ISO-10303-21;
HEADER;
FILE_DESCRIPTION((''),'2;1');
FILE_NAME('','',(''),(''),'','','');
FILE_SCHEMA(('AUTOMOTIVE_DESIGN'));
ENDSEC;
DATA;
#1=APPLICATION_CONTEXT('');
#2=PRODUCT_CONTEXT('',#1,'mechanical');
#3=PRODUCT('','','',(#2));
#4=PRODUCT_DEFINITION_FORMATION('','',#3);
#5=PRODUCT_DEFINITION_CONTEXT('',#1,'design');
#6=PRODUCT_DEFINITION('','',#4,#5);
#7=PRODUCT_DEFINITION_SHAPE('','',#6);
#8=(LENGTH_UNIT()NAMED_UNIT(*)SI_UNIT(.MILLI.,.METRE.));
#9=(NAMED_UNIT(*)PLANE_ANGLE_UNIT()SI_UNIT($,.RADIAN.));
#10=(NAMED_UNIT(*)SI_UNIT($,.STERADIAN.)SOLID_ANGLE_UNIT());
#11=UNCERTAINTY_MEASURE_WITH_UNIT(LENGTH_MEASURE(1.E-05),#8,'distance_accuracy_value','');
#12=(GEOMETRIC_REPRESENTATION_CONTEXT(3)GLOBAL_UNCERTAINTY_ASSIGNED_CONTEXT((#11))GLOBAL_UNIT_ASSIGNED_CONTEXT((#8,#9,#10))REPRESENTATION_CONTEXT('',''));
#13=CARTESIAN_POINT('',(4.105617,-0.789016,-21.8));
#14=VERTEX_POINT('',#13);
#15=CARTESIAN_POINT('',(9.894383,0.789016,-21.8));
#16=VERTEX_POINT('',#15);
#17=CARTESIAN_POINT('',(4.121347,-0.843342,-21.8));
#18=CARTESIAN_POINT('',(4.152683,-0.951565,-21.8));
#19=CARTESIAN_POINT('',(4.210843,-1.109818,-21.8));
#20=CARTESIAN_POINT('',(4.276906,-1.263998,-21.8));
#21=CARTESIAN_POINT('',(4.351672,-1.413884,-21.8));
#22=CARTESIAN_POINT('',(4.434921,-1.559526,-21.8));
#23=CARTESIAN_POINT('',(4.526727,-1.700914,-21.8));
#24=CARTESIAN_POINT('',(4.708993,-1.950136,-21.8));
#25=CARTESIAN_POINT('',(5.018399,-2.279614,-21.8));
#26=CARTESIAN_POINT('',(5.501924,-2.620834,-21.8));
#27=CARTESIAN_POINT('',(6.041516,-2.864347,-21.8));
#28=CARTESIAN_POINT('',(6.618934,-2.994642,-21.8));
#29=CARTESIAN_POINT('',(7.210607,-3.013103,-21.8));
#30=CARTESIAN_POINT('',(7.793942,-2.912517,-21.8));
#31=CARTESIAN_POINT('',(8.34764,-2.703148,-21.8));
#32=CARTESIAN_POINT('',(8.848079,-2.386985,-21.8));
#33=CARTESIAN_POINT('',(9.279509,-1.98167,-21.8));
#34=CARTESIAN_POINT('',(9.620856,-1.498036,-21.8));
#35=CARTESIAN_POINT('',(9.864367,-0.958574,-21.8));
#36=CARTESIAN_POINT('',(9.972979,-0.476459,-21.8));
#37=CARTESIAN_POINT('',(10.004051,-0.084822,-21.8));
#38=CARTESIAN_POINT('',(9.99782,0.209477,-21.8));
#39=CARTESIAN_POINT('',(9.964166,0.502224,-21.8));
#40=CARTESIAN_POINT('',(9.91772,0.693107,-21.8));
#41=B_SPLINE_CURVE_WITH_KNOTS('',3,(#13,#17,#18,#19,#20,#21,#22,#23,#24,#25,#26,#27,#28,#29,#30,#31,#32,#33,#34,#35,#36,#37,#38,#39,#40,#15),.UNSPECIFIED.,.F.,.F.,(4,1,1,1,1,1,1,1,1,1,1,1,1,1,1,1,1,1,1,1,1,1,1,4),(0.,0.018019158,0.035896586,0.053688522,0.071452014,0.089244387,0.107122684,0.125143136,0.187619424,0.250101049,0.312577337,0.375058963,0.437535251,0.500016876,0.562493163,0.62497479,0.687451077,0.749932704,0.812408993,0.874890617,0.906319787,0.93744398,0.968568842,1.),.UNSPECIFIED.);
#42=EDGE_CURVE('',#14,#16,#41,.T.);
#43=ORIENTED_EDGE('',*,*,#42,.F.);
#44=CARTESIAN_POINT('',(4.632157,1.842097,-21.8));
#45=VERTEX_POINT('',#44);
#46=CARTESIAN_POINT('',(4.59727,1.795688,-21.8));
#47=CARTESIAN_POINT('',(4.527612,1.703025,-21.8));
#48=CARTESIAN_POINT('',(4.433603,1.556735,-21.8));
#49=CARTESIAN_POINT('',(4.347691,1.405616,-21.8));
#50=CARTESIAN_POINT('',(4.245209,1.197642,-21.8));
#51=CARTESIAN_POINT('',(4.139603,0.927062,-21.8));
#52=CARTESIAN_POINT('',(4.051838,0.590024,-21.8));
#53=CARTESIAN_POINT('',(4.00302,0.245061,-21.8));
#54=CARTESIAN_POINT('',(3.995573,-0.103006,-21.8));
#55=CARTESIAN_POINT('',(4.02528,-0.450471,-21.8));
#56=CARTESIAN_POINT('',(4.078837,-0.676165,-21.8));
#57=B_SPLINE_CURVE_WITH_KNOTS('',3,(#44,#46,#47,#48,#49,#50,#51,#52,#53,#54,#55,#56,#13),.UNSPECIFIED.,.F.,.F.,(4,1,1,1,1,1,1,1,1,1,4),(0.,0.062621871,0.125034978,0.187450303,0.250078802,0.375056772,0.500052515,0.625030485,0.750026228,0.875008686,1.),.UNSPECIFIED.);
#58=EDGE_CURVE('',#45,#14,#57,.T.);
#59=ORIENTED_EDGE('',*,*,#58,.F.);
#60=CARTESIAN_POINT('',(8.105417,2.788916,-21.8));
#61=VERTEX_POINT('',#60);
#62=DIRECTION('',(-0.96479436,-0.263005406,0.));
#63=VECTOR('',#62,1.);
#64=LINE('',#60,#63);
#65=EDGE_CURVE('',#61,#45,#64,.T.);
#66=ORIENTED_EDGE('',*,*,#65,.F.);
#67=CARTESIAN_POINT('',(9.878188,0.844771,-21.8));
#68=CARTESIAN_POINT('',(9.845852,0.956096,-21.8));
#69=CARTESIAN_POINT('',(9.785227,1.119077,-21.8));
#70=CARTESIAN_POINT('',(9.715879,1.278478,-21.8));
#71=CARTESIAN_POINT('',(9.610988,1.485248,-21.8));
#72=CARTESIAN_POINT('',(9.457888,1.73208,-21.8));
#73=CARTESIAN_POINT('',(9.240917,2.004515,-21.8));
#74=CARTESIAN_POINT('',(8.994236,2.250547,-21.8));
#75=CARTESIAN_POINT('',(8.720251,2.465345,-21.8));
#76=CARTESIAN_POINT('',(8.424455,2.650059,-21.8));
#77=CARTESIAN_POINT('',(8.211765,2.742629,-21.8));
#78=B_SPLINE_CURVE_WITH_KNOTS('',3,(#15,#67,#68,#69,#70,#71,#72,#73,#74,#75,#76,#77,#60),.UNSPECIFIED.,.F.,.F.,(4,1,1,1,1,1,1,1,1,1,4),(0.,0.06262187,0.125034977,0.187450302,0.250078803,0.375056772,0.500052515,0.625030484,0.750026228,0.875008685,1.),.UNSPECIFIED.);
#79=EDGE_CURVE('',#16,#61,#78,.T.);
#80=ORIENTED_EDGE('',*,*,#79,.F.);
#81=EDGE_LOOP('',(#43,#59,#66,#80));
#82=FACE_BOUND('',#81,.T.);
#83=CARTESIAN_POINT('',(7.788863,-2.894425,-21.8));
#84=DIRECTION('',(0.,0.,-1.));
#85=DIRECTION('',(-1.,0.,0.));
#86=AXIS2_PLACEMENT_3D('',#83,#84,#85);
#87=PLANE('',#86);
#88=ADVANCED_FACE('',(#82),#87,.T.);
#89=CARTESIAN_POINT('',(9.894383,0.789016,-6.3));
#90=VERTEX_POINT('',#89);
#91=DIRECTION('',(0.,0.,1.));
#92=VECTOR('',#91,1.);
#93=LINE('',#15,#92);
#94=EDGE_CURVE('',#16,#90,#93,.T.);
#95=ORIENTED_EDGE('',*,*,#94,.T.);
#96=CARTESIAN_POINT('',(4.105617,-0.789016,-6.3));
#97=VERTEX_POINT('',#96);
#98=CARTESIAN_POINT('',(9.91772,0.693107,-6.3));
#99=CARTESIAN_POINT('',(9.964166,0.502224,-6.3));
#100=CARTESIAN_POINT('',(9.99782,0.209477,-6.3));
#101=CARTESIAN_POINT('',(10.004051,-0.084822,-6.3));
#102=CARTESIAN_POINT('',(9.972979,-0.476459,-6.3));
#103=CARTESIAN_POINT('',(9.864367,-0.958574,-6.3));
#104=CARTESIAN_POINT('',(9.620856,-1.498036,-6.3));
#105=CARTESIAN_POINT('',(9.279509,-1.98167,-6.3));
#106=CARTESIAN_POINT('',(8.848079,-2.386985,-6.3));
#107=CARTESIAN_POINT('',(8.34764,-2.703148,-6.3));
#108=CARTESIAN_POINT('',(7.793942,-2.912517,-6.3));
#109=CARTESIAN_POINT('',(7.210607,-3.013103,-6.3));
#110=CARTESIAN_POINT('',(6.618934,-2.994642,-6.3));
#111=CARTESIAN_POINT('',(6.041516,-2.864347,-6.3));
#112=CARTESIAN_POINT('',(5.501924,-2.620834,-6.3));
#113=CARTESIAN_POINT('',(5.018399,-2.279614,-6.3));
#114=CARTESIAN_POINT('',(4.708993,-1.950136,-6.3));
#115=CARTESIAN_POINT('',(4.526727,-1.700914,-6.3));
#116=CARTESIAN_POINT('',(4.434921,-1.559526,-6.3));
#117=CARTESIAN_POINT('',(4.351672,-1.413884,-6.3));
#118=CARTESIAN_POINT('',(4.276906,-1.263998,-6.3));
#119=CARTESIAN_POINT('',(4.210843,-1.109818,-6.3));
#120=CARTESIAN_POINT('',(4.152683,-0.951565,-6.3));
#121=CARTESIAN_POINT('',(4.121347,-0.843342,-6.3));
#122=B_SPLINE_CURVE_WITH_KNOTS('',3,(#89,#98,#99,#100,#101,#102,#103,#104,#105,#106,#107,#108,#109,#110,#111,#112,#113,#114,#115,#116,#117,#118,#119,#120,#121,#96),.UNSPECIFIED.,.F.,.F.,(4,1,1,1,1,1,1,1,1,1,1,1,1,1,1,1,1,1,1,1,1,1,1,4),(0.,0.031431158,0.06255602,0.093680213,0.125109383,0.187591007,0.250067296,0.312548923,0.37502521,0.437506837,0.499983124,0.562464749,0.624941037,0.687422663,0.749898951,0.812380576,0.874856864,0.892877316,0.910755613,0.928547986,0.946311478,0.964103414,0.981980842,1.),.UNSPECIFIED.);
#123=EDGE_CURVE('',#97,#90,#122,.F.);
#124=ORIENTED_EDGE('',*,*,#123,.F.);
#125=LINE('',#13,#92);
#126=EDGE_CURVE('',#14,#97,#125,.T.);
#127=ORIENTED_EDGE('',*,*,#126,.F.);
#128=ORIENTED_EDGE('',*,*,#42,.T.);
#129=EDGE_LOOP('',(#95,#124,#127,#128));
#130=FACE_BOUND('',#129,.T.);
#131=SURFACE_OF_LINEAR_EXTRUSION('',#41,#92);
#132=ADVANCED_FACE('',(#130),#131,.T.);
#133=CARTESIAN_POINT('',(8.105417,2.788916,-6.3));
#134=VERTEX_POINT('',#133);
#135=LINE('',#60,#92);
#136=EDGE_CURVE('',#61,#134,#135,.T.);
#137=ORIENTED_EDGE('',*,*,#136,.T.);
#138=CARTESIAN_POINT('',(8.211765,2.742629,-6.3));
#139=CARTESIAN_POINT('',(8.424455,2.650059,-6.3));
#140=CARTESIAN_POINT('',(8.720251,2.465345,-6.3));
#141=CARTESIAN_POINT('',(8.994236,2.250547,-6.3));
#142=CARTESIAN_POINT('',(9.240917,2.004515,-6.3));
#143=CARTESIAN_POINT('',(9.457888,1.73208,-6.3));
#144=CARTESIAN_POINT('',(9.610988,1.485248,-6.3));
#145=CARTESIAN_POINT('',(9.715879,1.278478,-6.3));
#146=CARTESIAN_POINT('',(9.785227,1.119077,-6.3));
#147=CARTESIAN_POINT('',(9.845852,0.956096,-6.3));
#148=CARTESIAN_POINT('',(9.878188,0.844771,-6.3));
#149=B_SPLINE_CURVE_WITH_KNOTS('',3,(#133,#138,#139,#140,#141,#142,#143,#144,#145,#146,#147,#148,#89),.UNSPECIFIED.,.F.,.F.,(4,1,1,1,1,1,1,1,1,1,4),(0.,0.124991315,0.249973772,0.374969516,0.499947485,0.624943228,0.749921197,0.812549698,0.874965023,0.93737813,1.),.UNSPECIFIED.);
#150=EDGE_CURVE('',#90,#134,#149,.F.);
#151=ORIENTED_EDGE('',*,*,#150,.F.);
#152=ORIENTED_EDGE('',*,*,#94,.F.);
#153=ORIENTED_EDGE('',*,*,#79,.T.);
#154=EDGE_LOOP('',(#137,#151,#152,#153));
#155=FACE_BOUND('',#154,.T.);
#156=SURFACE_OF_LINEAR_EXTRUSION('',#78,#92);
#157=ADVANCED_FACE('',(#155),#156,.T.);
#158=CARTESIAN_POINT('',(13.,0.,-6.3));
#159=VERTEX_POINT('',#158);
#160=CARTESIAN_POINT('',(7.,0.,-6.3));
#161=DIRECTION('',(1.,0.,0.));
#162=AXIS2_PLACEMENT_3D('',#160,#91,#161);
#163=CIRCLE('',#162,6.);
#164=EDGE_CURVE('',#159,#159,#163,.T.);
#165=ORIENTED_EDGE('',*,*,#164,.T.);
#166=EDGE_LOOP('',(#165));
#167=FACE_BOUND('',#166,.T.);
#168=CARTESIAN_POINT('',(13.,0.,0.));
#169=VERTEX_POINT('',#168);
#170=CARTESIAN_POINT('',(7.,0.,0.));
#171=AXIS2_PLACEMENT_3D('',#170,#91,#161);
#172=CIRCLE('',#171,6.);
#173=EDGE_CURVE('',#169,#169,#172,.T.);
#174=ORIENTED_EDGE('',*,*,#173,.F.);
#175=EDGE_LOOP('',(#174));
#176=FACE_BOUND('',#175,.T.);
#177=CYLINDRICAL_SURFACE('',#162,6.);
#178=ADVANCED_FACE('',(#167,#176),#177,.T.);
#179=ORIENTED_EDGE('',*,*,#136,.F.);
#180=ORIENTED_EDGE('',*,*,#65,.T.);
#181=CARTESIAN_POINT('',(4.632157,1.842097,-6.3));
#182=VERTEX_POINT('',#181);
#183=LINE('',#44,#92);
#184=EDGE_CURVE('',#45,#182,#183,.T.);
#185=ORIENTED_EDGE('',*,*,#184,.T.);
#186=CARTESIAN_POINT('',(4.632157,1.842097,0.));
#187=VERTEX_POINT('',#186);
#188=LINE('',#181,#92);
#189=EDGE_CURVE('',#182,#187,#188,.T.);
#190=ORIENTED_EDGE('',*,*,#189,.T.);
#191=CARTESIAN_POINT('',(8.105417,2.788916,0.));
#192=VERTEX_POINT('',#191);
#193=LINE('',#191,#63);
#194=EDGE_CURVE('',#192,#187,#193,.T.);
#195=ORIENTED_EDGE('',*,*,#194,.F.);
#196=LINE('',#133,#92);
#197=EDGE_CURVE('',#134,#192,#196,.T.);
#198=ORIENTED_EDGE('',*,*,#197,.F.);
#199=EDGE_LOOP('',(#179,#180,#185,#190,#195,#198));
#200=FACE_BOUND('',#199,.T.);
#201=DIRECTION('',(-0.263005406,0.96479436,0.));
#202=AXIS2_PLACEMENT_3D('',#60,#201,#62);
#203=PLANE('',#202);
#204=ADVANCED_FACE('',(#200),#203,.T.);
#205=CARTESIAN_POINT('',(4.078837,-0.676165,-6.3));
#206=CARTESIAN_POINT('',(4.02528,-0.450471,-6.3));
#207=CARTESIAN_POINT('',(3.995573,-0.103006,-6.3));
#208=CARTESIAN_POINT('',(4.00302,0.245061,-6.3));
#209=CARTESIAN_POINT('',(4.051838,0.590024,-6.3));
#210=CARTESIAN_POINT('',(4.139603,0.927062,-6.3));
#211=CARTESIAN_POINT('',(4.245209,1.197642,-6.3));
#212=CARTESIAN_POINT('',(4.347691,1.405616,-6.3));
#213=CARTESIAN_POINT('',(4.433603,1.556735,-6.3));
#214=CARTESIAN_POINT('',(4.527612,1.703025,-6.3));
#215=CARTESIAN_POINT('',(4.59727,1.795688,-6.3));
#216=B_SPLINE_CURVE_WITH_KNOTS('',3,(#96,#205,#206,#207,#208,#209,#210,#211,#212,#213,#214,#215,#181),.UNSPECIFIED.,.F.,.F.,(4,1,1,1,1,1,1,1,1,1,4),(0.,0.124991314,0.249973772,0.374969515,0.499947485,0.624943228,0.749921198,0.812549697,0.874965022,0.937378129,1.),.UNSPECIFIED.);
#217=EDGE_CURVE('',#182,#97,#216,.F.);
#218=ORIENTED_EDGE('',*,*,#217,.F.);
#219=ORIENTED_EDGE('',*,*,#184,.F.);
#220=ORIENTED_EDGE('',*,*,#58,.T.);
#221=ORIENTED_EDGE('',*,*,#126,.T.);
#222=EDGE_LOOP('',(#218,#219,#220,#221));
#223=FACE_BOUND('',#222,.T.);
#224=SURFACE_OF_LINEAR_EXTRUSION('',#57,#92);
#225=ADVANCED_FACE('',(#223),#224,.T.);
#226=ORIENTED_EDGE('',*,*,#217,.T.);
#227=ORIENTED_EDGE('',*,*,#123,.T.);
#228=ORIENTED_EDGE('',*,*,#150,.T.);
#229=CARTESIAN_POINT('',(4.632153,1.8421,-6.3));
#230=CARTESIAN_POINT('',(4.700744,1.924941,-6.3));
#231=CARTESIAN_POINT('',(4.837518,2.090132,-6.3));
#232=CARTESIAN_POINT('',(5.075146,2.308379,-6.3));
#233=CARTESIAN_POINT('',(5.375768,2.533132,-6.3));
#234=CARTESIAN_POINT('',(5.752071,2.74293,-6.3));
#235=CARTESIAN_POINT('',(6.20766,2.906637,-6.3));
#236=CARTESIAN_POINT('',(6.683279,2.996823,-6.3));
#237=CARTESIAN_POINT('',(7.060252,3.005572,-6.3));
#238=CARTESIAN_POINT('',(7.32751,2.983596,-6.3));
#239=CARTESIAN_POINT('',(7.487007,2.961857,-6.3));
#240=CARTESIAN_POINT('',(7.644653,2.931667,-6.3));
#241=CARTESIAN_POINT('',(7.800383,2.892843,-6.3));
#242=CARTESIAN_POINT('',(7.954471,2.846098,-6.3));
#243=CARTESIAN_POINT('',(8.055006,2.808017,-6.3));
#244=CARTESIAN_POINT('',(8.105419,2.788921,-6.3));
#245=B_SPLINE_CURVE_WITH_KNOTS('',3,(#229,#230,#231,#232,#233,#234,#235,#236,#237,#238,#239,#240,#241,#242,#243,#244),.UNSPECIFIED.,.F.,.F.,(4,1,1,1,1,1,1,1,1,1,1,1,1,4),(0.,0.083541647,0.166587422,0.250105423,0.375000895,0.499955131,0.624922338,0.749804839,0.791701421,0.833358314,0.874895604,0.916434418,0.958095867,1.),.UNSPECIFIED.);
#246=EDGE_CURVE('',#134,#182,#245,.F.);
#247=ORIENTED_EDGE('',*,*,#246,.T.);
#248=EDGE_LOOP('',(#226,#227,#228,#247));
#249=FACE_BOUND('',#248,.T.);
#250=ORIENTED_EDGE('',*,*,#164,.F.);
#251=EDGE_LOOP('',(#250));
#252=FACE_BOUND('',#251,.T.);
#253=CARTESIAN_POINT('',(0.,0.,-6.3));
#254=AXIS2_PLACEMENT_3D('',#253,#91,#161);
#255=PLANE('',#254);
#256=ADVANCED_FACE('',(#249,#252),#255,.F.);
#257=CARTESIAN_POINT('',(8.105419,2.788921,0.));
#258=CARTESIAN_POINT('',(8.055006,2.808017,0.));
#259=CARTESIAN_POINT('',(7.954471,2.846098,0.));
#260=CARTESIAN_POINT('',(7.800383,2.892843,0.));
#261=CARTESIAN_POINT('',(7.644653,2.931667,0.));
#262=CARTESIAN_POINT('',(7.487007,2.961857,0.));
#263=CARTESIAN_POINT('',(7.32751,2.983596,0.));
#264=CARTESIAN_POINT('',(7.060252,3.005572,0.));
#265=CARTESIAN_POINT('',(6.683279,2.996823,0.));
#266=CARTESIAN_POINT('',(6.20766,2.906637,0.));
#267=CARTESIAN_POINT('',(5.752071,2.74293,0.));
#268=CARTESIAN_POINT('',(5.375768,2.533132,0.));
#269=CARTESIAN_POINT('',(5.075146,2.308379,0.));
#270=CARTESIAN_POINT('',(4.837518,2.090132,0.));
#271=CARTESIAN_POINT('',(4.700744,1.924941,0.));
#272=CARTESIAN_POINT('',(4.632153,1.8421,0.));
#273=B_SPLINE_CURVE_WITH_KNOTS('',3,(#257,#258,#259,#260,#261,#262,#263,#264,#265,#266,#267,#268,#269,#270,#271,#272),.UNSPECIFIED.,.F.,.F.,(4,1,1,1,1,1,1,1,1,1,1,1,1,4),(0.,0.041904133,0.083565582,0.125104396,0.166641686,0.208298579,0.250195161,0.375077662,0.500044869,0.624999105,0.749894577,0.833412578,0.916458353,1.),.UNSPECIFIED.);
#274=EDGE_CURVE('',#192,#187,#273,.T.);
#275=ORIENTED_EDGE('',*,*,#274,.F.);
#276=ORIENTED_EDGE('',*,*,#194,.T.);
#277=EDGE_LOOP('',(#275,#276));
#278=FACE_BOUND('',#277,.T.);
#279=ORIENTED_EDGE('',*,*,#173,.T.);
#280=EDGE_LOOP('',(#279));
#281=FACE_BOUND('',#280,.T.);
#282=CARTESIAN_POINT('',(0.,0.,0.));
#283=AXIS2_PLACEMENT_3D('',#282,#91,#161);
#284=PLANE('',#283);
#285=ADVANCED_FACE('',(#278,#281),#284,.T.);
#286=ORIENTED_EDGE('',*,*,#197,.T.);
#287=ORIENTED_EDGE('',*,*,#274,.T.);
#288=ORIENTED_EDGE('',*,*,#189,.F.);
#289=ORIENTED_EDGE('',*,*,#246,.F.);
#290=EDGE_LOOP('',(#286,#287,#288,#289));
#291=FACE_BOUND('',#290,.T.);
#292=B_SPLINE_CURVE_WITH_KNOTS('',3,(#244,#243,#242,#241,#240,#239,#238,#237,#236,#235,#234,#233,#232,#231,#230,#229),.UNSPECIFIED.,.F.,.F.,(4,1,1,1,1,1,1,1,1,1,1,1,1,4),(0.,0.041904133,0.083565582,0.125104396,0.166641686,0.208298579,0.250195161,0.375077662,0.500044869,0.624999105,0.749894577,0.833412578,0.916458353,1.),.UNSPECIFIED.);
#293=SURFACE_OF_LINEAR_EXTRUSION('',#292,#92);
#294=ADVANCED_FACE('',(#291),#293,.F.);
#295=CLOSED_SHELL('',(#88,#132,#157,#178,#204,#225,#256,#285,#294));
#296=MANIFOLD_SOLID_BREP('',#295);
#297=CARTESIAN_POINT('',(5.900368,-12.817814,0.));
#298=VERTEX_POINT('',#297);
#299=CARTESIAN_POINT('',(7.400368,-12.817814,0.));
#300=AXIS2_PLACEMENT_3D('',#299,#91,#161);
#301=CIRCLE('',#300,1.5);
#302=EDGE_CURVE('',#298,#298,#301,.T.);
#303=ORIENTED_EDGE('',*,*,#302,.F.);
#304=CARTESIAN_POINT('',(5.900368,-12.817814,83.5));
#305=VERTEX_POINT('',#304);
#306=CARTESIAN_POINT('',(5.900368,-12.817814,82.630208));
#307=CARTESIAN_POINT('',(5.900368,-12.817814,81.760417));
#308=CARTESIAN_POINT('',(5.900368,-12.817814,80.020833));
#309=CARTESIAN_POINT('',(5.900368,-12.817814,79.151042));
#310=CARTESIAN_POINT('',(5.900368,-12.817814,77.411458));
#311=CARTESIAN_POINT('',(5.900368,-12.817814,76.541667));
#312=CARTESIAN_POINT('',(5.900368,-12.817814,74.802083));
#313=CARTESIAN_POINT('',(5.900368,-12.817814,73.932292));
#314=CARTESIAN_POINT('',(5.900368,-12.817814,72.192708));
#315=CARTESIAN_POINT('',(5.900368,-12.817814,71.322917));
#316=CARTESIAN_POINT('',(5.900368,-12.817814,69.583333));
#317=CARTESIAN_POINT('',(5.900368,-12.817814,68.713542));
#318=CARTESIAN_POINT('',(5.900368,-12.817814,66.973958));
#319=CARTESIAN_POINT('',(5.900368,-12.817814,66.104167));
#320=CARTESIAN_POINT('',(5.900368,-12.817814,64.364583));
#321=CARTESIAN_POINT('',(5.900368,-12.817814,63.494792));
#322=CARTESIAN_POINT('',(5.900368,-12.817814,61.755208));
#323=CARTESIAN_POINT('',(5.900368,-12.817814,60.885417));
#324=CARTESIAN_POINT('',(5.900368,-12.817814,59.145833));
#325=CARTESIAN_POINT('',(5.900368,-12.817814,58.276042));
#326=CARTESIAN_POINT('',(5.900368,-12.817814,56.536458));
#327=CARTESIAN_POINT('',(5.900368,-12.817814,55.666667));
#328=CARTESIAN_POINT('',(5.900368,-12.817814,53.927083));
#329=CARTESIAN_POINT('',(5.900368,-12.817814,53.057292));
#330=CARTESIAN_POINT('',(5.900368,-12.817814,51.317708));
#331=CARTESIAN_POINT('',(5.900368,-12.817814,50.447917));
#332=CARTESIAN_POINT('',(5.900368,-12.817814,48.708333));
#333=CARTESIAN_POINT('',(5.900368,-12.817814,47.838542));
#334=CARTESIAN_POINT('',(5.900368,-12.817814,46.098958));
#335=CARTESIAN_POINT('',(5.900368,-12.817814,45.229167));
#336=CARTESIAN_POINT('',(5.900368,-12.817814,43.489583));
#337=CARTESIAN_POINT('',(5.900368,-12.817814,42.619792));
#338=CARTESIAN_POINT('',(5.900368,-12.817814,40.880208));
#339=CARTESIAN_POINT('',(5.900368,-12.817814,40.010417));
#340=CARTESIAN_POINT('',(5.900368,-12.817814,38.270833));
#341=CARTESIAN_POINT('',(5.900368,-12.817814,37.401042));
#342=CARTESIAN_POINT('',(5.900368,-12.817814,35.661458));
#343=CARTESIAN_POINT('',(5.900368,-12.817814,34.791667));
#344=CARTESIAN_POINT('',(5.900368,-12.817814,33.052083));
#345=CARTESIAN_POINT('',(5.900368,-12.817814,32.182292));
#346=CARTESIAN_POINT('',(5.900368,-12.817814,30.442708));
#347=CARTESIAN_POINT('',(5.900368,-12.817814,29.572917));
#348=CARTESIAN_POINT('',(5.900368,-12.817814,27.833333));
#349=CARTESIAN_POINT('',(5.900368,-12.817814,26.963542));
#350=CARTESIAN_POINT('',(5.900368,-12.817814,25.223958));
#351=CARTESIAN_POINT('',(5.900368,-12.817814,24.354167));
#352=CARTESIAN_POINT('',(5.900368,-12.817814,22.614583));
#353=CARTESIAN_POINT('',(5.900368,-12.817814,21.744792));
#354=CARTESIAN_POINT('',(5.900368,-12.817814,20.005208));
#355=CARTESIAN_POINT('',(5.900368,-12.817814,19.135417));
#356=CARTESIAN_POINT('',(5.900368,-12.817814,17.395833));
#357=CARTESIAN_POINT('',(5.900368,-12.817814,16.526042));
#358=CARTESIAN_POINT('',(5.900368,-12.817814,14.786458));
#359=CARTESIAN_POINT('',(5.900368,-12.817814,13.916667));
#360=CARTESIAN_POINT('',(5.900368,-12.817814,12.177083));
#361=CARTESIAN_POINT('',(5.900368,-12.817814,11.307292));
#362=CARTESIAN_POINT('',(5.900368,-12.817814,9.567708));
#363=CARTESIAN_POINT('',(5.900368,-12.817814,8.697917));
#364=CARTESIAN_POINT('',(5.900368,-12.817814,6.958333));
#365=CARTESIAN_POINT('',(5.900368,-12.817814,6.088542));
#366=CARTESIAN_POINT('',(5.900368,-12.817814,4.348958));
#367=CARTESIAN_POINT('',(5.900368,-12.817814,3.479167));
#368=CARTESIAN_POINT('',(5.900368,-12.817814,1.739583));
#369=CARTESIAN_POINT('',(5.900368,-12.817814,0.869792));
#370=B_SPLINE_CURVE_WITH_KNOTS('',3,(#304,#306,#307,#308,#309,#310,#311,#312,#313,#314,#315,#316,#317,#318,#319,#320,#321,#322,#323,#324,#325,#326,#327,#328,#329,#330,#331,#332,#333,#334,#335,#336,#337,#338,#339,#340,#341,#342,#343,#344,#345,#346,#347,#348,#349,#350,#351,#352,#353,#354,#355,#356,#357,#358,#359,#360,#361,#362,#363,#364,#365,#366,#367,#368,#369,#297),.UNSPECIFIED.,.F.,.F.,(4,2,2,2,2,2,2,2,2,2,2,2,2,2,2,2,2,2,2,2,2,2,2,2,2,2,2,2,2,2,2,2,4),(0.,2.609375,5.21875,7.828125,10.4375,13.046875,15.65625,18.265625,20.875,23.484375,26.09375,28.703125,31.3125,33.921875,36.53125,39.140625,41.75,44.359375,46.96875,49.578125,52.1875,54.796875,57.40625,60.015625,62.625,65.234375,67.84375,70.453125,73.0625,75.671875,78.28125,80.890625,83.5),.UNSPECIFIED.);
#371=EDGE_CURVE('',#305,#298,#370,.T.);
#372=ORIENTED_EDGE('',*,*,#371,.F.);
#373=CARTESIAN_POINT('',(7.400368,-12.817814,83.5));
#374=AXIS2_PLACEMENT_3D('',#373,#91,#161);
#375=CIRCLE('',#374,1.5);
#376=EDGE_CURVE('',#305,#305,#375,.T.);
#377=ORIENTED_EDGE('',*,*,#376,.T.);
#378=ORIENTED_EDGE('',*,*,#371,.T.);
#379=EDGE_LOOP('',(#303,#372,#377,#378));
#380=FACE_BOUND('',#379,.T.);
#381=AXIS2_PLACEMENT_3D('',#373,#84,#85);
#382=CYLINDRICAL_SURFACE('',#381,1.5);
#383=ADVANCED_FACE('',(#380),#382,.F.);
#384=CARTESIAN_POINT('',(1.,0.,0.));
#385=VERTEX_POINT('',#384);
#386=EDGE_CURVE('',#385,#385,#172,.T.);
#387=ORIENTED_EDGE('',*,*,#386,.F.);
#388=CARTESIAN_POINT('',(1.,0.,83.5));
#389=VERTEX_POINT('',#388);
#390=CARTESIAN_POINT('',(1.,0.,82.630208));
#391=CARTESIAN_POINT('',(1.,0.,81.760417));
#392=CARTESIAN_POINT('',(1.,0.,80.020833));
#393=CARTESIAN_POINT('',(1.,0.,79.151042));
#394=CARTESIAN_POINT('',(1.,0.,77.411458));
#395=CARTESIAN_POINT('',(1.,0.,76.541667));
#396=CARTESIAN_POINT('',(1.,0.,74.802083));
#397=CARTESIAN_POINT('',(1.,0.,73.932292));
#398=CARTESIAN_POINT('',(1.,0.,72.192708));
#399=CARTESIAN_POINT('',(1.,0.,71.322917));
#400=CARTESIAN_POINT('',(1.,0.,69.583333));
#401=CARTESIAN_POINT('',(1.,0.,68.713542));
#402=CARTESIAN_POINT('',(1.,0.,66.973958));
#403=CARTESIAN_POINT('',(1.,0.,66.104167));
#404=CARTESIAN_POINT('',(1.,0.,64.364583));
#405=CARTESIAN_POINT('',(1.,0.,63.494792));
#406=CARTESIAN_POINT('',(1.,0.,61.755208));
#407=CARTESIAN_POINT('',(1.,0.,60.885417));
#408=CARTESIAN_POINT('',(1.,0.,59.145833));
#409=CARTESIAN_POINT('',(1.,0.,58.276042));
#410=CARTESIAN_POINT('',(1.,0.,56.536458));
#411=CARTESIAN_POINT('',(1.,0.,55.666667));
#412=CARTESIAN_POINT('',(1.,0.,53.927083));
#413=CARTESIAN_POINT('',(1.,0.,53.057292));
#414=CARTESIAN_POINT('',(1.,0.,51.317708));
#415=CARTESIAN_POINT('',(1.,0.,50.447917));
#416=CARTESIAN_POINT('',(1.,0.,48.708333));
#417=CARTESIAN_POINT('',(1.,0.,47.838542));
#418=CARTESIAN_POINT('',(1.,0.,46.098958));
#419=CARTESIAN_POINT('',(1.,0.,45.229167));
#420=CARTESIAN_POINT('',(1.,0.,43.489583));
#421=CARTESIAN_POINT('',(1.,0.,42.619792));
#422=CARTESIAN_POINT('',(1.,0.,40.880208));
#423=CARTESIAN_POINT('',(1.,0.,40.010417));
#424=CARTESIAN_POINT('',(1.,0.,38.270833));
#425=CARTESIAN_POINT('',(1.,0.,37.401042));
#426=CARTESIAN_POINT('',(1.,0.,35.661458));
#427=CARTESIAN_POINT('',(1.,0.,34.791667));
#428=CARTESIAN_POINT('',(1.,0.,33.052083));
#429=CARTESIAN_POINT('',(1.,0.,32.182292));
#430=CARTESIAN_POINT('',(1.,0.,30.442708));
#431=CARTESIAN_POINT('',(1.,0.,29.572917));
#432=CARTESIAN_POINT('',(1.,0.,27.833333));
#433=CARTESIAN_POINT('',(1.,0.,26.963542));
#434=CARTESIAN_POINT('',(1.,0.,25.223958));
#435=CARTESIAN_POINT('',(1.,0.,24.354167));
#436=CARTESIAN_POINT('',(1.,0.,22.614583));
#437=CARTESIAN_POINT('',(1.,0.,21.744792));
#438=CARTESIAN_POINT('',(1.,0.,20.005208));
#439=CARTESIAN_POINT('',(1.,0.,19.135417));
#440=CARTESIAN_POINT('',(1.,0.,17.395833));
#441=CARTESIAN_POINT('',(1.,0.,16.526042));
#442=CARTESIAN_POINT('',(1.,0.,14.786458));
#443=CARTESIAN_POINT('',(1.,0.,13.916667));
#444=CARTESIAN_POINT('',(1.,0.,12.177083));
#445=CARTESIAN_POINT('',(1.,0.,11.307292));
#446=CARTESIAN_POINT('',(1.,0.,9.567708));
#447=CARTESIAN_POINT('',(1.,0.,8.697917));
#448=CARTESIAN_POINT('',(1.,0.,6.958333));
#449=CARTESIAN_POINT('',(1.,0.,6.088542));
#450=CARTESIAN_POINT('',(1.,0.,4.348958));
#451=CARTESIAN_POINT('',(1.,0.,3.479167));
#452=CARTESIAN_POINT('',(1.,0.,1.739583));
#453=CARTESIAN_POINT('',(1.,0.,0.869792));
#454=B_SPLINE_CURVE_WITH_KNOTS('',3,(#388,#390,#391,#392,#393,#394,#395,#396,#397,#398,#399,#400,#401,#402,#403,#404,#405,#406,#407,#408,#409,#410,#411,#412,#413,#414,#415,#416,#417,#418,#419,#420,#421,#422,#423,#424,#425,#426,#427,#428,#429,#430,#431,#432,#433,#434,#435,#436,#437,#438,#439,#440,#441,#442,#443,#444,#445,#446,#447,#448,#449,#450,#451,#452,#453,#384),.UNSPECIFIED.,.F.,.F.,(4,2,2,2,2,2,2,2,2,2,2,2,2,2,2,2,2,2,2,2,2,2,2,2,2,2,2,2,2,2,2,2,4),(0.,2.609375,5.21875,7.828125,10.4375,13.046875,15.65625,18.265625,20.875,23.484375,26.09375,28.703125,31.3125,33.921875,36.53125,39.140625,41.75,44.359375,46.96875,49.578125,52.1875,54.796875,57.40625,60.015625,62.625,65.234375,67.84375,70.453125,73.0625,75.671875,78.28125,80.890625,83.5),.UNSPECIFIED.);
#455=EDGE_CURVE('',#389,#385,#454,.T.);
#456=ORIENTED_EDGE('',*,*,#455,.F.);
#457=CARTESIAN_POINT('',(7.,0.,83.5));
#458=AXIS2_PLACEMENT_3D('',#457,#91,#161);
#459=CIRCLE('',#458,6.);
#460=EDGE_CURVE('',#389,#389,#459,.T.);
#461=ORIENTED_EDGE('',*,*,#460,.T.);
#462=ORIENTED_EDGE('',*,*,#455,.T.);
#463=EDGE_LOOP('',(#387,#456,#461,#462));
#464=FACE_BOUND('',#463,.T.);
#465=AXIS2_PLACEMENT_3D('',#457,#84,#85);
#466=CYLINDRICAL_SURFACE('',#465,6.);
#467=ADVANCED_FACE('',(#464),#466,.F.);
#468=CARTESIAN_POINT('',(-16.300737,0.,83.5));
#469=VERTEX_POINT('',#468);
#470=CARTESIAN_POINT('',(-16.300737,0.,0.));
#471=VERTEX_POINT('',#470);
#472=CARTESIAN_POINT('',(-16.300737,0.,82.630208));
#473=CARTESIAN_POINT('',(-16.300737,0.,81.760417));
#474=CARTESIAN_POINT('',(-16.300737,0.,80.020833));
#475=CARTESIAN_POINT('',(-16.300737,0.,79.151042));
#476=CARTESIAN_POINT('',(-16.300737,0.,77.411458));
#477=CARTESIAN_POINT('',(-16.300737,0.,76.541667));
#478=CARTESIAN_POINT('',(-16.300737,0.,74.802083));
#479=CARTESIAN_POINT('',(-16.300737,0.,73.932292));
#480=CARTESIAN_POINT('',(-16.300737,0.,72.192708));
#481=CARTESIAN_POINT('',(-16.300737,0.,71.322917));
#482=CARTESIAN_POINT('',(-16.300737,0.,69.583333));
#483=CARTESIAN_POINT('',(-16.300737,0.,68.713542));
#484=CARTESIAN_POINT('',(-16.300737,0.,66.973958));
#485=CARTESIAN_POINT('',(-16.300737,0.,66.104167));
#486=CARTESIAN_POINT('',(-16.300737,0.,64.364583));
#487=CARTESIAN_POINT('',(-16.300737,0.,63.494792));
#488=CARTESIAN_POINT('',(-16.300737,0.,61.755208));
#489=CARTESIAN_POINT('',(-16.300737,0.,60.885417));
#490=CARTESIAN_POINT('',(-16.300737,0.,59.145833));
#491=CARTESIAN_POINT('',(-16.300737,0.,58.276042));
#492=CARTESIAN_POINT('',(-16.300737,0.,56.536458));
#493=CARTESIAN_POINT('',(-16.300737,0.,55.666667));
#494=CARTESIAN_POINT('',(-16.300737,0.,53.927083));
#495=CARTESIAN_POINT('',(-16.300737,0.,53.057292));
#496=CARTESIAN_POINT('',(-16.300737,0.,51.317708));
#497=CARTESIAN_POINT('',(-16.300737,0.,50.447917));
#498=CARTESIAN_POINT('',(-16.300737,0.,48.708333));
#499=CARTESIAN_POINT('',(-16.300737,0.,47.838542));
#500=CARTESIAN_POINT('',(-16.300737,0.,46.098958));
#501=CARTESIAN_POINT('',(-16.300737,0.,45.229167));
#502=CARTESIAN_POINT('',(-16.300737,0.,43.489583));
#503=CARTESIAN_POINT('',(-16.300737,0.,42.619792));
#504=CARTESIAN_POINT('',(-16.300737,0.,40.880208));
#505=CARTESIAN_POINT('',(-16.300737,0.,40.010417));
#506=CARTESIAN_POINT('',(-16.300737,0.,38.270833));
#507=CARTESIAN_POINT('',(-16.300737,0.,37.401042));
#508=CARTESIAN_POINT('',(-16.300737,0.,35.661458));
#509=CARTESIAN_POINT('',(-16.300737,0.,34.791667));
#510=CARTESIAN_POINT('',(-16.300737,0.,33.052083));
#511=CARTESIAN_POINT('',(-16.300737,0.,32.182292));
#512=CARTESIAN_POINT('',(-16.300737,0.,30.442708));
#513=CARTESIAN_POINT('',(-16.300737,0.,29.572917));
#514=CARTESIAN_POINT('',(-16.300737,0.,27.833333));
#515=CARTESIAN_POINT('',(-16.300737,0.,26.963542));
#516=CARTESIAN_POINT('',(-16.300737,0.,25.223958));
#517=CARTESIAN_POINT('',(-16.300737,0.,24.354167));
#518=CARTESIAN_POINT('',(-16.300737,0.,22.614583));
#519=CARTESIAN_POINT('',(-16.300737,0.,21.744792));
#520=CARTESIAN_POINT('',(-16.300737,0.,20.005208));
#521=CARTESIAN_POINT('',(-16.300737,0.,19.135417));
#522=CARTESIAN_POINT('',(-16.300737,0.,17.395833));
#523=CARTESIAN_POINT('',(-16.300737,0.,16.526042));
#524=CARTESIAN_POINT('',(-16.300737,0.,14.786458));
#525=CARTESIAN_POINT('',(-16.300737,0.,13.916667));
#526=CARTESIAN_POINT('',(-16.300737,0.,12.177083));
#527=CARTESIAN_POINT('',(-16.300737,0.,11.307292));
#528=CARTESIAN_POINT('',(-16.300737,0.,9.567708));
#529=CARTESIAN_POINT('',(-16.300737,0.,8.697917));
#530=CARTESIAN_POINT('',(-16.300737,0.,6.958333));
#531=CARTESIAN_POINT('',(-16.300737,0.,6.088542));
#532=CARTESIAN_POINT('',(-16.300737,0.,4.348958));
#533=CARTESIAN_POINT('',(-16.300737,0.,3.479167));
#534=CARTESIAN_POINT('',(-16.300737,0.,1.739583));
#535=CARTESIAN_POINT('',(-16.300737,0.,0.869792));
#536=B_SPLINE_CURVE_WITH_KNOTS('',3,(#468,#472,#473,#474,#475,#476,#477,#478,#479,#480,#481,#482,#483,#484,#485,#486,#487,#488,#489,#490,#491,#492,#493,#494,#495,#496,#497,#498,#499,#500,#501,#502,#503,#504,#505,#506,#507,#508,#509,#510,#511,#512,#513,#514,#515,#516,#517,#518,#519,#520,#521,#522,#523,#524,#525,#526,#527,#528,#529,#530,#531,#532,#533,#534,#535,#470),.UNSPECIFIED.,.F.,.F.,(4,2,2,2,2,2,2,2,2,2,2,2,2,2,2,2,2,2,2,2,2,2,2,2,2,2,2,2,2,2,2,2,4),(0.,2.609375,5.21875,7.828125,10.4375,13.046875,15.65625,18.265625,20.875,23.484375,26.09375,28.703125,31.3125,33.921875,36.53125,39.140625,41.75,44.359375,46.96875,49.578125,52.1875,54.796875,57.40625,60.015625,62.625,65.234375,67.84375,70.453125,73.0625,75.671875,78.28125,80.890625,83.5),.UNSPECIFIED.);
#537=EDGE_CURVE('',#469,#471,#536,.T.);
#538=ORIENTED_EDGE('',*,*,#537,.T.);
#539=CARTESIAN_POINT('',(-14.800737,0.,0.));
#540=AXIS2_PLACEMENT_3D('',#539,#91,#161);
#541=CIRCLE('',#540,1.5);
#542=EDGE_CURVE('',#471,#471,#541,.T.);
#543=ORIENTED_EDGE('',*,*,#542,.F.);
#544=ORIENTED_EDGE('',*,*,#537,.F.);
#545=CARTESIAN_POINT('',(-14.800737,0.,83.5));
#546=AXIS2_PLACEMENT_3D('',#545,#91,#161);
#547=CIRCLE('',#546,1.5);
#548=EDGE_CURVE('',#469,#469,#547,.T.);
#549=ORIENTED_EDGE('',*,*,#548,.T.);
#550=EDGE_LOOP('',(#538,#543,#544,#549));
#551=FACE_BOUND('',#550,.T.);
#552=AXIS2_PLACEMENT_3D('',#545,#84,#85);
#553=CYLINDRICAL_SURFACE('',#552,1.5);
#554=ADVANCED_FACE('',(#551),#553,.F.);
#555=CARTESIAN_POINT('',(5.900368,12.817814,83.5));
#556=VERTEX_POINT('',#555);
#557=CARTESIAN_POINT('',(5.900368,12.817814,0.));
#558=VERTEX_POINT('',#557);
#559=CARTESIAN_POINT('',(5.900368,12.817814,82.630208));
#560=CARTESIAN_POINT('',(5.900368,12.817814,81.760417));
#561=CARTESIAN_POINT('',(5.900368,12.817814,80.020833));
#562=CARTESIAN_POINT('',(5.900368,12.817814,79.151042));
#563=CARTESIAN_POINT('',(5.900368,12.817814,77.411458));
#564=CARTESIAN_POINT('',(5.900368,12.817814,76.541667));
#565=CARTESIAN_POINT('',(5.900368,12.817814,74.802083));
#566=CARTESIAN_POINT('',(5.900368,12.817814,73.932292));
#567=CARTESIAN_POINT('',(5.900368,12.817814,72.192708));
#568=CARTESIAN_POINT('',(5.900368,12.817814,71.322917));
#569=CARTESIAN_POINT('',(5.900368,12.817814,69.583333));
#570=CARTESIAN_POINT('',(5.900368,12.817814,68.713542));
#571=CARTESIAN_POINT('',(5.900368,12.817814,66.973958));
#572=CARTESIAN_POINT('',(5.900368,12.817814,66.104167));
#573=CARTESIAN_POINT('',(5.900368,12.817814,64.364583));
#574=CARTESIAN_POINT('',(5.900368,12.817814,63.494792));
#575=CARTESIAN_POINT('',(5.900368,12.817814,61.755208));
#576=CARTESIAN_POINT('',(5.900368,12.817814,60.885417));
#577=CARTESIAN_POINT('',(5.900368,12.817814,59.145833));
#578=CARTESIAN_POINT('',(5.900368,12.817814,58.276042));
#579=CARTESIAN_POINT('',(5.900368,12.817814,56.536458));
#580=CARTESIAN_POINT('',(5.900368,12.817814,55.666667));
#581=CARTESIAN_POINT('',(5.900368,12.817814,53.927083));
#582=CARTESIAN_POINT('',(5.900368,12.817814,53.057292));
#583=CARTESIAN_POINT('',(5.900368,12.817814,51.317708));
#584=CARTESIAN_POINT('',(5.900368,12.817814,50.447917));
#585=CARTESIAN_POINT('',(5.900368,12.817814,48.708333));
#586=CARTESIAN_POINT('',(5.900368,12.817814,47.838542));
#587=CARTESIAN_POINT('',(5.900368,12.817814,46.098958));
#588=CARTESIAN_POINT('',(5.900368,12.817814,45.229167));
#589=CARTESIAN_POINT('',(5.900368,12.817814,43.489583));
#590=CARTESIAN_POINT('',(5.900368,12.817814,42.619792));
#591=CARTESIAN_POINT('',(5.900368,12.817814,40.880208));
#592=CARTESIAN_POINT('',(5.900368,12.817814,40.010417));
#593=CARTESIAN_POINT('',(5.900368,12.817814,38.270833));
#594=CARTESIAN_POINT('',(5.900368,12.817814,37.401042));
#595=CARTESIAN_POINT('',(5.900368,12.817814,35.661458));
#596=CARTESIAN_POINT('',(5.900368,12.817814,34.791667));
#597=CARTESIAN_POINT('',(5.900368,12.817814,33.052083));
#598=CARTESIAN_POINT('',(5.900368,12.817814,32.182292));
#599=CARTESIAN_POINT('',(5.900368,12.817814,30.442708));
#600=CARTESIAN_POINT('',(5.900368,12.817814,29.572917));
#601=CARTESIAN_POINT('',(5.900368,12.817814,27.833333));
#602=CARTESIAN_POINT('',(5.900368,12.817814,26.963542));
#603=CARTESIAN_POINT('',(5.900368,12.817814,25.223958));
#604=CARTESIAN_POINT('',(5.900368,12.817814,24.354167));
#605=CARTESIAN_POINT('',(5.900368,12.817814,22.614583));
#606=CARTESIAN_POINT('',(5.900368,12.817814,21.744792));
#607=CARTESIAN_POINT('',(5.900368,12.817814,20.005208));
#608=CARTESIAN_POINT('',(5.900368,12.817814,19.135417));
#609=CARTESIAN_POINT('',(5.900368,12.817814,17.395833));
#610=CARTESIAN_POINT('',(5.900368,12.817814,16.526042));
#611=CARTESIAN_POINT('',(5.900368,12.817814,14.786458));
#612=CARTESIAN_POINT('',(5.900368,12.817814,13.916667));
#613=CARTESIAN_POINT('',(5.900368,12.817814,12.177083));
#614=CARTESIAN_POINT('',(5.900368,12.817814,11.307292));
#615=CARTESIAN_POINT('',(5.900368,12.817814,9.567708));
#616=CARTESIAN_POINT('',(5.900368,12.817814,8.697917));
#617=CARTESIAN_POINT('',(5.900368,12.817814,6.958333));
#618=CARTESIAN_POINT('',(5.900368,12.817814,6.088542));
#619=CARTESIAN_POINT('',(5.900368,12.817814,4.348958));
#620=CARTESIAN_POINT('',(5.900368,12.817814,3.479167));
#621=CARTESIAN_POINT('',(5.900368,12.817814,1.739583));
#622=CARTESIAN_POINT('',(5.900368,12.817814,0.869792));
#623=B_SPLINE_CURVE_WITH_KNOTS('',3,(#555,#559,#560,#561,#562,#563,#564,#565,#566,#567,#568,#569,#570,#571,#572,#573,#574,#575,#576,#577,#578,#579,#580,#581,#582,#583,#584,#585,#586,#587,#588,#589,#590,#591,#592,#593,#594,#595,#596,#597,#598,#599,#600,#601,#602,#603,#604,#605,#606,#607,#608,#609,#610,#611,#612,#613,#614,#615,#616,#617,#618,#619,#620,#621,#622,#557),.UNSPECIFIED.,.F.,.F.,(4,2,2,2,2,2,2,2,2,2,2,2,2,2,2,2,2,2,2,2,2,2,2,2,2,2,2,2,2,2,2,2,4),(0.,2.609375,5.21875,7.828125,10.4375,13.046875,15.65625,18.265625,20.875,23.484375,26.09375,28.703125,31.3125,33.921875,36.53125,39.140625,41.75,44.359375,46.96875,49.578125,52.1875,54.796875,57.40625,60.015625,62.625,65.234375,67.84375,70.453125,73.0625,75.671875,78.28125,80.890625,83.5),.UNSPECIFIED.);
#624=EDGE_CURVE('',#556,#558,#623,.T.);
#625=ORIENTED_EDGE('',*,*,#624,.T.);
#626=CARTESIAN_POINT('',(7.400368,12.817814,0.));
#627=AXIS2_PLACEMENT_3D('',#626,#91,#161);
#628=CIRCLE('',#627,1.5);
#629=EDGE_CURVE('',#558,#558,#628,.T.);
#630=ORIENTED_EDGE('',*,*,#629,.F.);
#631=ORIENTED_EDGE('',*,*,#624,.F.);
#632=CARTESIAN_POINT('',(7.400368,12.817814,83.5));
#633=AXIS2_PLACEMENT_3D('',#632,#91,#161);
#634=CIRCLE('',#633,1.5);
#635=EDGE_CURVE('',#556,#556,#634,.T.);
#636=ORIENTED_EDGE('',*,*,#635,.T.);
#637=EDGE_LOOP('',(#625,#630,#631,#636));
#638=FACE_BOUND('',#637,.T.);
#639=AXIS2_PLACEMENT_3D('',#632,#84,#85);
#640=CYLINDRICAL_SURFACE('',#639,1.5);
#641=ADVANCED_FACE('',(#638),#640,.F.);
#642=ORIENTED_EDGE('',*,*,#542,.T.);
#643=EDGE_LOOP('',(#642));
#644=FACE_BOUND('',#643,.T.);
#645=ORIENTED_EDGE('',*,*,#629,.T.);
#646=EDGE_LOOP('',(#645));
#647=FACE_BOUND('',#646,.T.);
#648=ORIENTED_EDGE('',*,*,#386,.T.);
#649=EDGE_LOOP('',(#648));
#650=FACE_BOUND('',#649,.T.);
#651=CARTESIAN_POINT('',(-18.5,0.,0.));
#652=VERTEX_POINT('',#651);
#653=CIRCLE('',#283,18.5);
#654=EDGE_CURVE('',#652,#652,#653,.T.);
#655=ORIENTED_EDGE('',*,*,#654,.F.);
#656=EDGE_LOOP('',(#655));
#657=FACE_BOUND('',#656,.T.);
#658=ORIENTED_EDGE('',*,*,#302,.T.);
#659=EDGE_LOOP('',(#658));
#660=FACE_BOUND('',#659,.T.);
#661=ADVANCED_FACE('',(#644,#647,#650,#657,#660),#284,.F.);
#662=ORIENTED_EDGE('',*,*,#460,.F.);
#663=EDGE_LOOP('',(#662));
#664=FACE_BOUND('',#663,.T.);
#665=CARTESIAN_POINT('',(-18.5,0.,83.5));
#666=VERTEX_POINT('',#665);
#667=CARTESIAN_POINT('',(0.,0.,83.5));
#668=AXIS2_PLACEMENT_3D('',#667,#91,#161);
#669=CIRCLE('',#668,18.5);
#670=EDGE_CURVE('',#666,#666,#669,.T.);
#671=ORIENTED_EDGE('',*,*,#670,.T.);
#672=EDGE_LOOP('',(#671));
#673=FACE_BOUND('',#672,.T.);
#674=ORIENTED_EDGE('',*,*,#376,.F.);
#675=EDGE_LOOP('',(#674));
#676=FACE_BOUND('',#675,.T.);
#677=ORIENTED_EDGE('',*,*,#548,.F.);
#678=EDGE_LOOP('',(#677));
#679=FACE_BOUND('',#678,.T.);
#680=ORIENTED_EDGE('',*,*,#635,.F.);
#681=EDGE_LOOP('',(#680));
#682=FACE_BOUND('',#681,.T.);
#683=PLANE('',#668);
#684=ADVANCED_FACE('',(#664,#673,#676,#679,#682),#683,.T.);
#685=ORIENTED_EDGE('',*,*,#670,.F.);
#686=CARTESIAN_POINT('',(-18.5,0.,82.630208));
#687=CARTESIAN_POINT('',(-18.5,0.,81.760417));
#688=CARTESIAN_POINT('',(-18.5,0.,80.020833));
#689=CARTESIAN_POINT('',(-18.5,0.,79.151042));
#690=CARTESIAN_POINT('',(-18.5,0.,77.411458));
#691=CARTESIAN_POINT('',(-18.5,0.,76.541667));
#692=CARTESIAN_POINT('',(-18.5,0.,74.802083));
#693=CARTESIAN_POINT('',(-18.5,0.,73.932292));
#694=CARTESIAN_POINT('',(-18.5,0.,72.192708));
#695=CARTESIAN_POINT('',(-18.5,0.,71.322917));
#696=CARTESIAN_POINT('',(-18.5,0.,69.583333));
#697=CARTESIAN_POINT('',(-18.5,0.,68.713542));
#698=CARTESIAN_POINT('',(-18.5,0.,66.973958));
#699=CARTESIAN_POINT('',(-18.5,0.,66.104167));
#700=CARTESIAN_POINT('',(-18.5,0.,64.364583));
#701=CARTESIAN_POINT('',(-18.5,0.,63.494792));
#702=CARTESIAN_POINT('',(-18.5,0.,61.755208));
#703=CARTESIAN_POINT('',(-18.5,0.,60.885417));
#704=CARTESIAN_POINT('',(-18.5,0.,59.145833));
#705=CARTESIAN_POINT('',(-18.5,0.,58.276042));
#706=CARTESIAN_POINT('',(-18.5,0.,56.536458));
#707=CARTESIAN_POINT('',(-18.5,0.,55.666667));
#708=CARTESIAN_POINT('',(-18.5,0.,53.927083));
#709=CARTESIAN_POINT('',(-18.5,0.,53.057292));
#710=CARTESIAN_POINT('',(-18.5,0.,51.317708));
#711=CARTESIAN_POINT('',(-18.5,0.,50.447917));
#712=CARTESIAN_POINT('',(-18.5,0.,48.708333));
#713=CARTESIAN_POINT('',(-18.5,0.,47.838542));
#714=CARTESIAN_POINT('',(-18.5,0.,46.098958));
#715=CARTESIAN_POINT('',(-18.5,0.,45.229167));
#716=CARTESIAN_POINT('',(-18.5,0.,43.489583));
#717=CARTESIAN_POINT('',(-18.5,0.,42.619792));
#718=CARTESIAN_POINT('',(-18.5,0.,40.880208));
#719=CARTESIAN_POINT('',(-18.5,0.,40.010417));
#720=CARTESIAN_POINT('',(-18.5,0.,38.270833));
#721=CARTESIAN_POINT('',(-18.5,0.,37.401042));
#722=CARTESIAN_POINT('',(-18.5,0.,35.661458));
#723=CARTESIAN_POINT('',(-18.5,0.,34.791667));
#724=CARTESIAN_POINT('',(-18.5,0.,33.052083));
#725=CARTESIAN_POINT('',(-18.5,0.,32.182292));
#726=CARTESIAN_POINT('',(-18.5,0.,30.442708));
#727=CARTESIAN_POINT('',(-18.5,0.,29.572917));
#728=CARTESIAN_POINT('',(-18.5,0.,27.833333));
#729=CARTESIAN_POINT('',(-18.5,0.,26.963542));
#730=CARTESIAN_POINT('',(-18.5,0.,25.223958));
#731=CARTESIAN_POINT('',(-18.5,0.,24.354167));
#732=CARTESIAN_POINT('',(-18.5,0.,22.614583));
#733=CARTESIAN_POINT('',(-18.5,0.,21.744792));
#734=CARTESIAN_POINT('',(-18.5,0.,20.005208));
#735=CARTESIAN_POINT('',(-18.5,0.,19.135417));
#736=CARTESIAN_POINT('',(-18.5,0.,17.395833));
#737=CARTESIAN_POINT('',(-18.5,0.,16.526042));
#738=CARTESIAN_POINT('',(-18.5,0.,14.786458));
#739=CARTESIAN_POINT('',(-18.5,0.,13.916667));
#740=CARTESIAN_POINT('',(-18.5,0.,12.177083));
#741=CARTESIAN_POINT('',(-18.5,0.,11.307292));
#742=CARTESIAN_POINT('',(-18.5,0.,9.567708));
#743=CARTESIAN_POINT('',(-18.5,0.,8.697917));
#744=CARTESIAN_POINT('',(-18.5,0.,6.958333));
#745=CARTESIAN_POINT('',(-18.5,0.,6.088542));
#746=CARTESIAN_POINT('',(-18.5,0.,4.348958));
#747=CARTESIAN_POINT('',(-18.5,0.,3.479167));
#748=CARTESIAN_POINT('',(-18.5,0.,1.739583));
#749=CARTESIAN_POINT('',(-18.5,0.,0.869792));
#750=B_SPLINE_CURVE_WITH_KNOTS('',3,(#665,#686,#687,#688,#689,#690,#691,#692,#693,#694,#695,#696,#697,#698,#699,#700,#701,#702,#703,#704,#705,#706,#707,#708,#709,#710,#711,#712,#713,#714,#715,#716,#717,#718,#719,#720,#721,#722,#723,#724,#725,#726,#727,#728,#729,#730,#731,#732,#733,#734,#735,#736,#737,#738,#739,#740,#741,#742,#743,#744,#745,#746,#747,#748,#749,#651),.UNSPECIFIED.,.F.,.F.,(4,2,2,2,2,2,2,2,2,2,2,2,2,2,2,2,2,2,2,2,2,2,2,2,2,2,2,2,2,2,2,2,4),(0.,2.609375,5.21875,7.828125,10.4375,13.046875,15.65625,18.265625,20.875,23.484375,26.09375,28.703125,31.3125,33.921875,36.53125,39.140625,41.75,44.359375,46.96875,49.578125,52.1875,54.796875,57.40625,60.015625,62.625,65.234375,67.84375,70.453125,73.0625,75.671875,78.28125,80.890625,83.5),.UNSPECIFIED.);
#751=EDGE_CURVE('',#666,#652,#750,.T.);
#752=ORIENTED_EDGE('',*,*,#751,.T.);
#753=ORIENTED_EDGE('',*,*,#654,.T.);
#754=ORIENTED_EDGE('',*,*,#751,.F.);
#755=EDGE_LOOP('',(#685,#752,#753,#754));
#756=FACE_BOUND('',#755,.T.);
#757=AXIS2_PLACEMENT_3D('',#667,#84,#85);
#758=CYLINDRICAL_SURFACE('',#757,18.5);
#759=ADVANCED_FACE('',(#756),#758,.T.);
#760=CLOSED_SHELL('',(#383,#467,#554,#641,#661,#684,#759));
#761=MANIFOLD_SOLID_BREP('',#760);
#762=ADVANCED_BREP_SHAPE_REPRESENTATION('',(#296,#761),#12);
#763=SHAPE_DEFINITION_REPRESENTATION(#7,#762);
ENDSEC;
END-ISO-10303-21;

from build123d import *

# Parameters (mm, degrees)
SKETCH1_R           = 1.5
BOSS_EXTRUDE1_DEPTH = 83.5
BOSS_EXTRUDE2_DEPTH = 6.3
BOSS_EXTRUDE3_DEPTH = 21.8


with BuildPart() as part:
    # Sketch1 → Boss-Extrude1 (new body)
    with BuildSketch(Plane.XY):
        with BuildLine():
            ThreePointArc((-18.5, -1e-09), (-1e-09, -18.500000001), (18.5, -4e-09))
            ThreePointArc((18.5, -4e-09), (1e-09, 18.499999998), (-18.5, -1e-09))
        make_face()
        with Locations(Location((7.400368446, -12.817814144, 0), (0, 0, 180))):
            Circle(SKETCH1_R, mode=Mode.SUBTRACT)
        with Locations(Location((-14.800736893, 0, 0), (0, 0, 180))):
            Circle(SKETCH1_R, mode=Mode.SUBTRACT)
        with BuildLine():
            ThreePointArc((13, -1e-09), (7, -6.000000001), (1, 0))
            ThreePointArc((1, 0), (7, 6), (13, -1e-09))
        make_face(mode=Mode.SUBTRACT)
        with Locations(Location((7.400368446, 12.817814144, 0), (0, 0, 180))):
            Circle(SKETCH1_R, mode=Mode.SUBTRACT)
    extrude(amount=BOSS_EXTRUDE1_DEPTH)


with BuildPart() as body_2:
    # Sketch1<4> → Boss-Extrude2 (new body)
    with BuildSketch(Plane.XY):
        with BuildLine():
            ThreePointArc((1, 0), (7, -6.000000001), (13, -1e-09))
            ThreePointArc((13, -1e-09), (7, 6), (1, 0))
        make_face()
        with BuildLine():
            add(Edge.make_bspline(
                [(8.10541894, 2.788921407), (8.05500552, 2.808017036), (7.954470645, 2.846097703), (7.800382794, 2.892843221), (7.644653105, 2.931666611), (7.487006952, 2.961856664), (7.327509508, 2.983596312), (7.060252278, 3.005571873), (6.68327869, 2.996823324), (6.207659642, 2.906637249), (5.752071024, 2.74292972), (5.375767864, 2.533132351), (5.075145817, 2.308378785), (4.837518217, 2.090132072), (4.700743618, 1.92494138), (4.632152753, 1.842100177)],
                knots=[0, 0, 0, 0, 0.041904133, 0.083565582, 0.125104396, 0.166641686, 0.208298579, 0.250195161, 0.375077662, 0.500044869, 0.624999105, 0.749894577, 0.833412578, 0.916458353, 1, 1, 1, 1], degree=3))
            add(Edge.make_bspline(
                [(4.632152753, 1.842100177), (4.597269985, 1.795687752), (4.527611903, 1.703024503), (4.433602806, 1.556735275), (4.347690797, 1.405616278), (4.245209228, 1.197641534), (4.139602727, 0.927062319), (4.05183773, 0.590024289), (4.003020314, 0.245060768), (3.995573118, -0.103006397), (4.02527969, -0.45047126), (4.078837212, -0.676165232), (4.105616921, -0.789016216)],
                knots=[0, 0, 0, 0, 0.062621871, 0.125034978, 0.187450303, 0.250078802, 0.375056772, 0.500052515, 0.625030485, 0.750026228, 0.875008686, 1, 1, 1, 1], degree=3))
            add(Edge.make_bspline(
                [(4.105616921, -0.789016216), (4.121346898, -0.843341546), (4.152683127, -0.95156491), (4.210842998, -1.109818013), (4.276905688, -1.263998492), (4.351672036, -1.413884276), (4.434920833, -1.559525946), (4.526726784, -1.700914361), (4.708992899, -1.950135671), (5.018399378, -2.279613745), (5.50192427, -2.620834329), (6.041515585, -2.864347025), (6.618933709, -2.994641949), (7.210607239, -3.013102901), (7.793942299, -2.912517343), (8.347639904, -2.703148265), (8.848078854, -2.386985144), (9.279508614, -1.981669651), (9.620855698, -1.498035987), (9.864366677, -0.958574348), (9.972979397, -0.476459302), (10.004050984, -0.084821691), (9.997819621, 0.209477257), (9.964166275, 0.502224345), (9.91771995, 0.693107384), (9.894383079, 0.789016217)],
                knots=[0, 0, 0, 0, 0.018019158, 0.035896586, 0.053688522, 0.071452014, 0.089244387, 0.107122684, 0.125143136, 0.187619424, 0.250101049, 0.312577337, 0.375058963, 0.437535251, 0.500016876, 0.562493163, 0.62497479, 0.687451077, 0.749932704, 0.812408993, 0.874890617, 0.906319787, 0.93744398, 0.968568842, 1, 1, 1, 1], degree=3))
            add(Edge.make_bspline(
                [(9.894383079, 0.789016217), (9.87818821, 0.844771359), (9.84585246, 0.956095774), (9.785226535, 1.119076588), (9.715878542, 1.278477594), (9.610987687, 1.485247696), (9.457888215, 1.732080426), (9.240916793, 2.004515242), (8.994236429, 2.250547291), (8.720251014, 2.465345345), (8.42445518, 2.650059005), (8.211765489, 2.742629371), (8.10541894, 2.788921407)],
                knots=[0, 0, 0, 0, 0.06262187, 0.125034977, 0.187450302, 0.250078803, 0.375056772, 0.500052515, 0.625030484, 0.750026228, 0.875008685, 1, 1, 1, 1], degree=3))
        make_face(mode=Mode.SUBTRACT)
    extrude(amount=-BOSS_EXTRUDE2_DEPTH)


with BuildPart() as boss_extrude3_tool:
    # Sketch1<5> → Boss-Extrude3 (new body)
    with BuildSketch(Plane.XY):
        with BuildLine():
            Line((8.105416875, 2.788916194), (4.632157178, 1.842096733))
            add(Edge.make_bspline(
                [(4.632157178, 1.842096733), (4.597269985, 1.795687752), (4.527611903, 1.703024503), (4.433602806, 1.556735275), (4.347690797, 1.405616278), (4.245209228, 1.197641534), (4.139602727, 0.927062319), (4.05183773, 0.590024289), (4.003020314, 0.245060768), (3.995573118, -0.103006397), (4.02527969, -0.45047126), (4.078837212, -0.676165232), (4.105616921, -0.789016216)],
                knots=[0, 0, 0, 0, 0.062621871, 0.125034978, 0.187450303, 0.250078802, 0.375056772, 0.500052515, 0.625030485, 0.750026228, 0.875008686, 1, 1, 1, 1], degree=3))
            add(Edge.make_bspline(
                [(4.105616921, -0.789016216), (4.121346898, -0.843341546), (4.152683127, -0.95156491), (4.210842998, -1.109818013), (4.276905688, -1.263998492), (4.351672036, -1.413884276), (4.434920833, -1.559525946), (4.526726784, -1.700914361), (4.708992899, -1.950135671), (5.018399378, -2.279613745), (5.50192427, -2.620834329), (6.041515585, -2.864347025), (6.618933709, -2.994641949), (7.210607239, -3.013102901), (7.793942299, -2.912517343), (8.347639904, -2.703148265), (8.848078854, -2.386985144), (9.279508614, -1.981669651), (9.620855698, -1.498035987), (9.864366677, -0.958574348), (9.972979397, -0.476459302), (10.004050984, -0.084821691), (9.997819621, 0.209477257), (9.964166275, 0.502224345), (9.91771995, 0.693107384), (9.894383079, 0.789016217)],
                knots=[0, 0, 0, 0, 0.018019158, 0.035896586, 0.053688522, 0.071452014, 0.089244387, 0.107122684, 0.125143136, 0.187619424, 0.250101049, 0.312577337, 0.375058963, 0.437535251, 0.500016876, 0.562493163, 0.62497479, 0.687451077, 0.749932704, 0.812408993, 0.874890617, 0.906319787, 0.93744398, 0.968568842, 1, 1, 1, 1], degree=3))
            add(Edge.make_bspline(
                [(9.894383079, 0.789016217), (9.87818821, 0.844771359), (9.84585246, 0.956095774), (9.785226535, 1.119076588), (9.715878542, 1.278477594), (9.610987687, 1.485247696), (9.457888215, 1.732080426), (9.240916793, 2.004515242), (8.994236429, 2.250547291), (8.720251014, 2.465345345), (8.42445518, 2.650059005), (8.211765489, 2.742629371), (8.105416875, 2.788916194)],
                knots=[0, 0, 0, 0, 0.06262187, 0.125034977, 0.187450302, 0.250078803, 0.375056772, 0.500052515, 0.625030484, 0.750026228, 0.875008685, 1, 1, 1, 1], degree=3))
        make_face()
    extrude(amount=-BOSS_EXTRUDE3_DEPTH)


with BuildPart() as body_2_1:
    add(body_2.part)


with BuildPart() as body_2_2:
    # Boss-Extrude3: joined with boss_extrude3_tool
    add(body_2_1.part.fuse(boss_extrude3_tool.part, tol=0.00001))


solid = Compound([part.part, body_2_2.part])
